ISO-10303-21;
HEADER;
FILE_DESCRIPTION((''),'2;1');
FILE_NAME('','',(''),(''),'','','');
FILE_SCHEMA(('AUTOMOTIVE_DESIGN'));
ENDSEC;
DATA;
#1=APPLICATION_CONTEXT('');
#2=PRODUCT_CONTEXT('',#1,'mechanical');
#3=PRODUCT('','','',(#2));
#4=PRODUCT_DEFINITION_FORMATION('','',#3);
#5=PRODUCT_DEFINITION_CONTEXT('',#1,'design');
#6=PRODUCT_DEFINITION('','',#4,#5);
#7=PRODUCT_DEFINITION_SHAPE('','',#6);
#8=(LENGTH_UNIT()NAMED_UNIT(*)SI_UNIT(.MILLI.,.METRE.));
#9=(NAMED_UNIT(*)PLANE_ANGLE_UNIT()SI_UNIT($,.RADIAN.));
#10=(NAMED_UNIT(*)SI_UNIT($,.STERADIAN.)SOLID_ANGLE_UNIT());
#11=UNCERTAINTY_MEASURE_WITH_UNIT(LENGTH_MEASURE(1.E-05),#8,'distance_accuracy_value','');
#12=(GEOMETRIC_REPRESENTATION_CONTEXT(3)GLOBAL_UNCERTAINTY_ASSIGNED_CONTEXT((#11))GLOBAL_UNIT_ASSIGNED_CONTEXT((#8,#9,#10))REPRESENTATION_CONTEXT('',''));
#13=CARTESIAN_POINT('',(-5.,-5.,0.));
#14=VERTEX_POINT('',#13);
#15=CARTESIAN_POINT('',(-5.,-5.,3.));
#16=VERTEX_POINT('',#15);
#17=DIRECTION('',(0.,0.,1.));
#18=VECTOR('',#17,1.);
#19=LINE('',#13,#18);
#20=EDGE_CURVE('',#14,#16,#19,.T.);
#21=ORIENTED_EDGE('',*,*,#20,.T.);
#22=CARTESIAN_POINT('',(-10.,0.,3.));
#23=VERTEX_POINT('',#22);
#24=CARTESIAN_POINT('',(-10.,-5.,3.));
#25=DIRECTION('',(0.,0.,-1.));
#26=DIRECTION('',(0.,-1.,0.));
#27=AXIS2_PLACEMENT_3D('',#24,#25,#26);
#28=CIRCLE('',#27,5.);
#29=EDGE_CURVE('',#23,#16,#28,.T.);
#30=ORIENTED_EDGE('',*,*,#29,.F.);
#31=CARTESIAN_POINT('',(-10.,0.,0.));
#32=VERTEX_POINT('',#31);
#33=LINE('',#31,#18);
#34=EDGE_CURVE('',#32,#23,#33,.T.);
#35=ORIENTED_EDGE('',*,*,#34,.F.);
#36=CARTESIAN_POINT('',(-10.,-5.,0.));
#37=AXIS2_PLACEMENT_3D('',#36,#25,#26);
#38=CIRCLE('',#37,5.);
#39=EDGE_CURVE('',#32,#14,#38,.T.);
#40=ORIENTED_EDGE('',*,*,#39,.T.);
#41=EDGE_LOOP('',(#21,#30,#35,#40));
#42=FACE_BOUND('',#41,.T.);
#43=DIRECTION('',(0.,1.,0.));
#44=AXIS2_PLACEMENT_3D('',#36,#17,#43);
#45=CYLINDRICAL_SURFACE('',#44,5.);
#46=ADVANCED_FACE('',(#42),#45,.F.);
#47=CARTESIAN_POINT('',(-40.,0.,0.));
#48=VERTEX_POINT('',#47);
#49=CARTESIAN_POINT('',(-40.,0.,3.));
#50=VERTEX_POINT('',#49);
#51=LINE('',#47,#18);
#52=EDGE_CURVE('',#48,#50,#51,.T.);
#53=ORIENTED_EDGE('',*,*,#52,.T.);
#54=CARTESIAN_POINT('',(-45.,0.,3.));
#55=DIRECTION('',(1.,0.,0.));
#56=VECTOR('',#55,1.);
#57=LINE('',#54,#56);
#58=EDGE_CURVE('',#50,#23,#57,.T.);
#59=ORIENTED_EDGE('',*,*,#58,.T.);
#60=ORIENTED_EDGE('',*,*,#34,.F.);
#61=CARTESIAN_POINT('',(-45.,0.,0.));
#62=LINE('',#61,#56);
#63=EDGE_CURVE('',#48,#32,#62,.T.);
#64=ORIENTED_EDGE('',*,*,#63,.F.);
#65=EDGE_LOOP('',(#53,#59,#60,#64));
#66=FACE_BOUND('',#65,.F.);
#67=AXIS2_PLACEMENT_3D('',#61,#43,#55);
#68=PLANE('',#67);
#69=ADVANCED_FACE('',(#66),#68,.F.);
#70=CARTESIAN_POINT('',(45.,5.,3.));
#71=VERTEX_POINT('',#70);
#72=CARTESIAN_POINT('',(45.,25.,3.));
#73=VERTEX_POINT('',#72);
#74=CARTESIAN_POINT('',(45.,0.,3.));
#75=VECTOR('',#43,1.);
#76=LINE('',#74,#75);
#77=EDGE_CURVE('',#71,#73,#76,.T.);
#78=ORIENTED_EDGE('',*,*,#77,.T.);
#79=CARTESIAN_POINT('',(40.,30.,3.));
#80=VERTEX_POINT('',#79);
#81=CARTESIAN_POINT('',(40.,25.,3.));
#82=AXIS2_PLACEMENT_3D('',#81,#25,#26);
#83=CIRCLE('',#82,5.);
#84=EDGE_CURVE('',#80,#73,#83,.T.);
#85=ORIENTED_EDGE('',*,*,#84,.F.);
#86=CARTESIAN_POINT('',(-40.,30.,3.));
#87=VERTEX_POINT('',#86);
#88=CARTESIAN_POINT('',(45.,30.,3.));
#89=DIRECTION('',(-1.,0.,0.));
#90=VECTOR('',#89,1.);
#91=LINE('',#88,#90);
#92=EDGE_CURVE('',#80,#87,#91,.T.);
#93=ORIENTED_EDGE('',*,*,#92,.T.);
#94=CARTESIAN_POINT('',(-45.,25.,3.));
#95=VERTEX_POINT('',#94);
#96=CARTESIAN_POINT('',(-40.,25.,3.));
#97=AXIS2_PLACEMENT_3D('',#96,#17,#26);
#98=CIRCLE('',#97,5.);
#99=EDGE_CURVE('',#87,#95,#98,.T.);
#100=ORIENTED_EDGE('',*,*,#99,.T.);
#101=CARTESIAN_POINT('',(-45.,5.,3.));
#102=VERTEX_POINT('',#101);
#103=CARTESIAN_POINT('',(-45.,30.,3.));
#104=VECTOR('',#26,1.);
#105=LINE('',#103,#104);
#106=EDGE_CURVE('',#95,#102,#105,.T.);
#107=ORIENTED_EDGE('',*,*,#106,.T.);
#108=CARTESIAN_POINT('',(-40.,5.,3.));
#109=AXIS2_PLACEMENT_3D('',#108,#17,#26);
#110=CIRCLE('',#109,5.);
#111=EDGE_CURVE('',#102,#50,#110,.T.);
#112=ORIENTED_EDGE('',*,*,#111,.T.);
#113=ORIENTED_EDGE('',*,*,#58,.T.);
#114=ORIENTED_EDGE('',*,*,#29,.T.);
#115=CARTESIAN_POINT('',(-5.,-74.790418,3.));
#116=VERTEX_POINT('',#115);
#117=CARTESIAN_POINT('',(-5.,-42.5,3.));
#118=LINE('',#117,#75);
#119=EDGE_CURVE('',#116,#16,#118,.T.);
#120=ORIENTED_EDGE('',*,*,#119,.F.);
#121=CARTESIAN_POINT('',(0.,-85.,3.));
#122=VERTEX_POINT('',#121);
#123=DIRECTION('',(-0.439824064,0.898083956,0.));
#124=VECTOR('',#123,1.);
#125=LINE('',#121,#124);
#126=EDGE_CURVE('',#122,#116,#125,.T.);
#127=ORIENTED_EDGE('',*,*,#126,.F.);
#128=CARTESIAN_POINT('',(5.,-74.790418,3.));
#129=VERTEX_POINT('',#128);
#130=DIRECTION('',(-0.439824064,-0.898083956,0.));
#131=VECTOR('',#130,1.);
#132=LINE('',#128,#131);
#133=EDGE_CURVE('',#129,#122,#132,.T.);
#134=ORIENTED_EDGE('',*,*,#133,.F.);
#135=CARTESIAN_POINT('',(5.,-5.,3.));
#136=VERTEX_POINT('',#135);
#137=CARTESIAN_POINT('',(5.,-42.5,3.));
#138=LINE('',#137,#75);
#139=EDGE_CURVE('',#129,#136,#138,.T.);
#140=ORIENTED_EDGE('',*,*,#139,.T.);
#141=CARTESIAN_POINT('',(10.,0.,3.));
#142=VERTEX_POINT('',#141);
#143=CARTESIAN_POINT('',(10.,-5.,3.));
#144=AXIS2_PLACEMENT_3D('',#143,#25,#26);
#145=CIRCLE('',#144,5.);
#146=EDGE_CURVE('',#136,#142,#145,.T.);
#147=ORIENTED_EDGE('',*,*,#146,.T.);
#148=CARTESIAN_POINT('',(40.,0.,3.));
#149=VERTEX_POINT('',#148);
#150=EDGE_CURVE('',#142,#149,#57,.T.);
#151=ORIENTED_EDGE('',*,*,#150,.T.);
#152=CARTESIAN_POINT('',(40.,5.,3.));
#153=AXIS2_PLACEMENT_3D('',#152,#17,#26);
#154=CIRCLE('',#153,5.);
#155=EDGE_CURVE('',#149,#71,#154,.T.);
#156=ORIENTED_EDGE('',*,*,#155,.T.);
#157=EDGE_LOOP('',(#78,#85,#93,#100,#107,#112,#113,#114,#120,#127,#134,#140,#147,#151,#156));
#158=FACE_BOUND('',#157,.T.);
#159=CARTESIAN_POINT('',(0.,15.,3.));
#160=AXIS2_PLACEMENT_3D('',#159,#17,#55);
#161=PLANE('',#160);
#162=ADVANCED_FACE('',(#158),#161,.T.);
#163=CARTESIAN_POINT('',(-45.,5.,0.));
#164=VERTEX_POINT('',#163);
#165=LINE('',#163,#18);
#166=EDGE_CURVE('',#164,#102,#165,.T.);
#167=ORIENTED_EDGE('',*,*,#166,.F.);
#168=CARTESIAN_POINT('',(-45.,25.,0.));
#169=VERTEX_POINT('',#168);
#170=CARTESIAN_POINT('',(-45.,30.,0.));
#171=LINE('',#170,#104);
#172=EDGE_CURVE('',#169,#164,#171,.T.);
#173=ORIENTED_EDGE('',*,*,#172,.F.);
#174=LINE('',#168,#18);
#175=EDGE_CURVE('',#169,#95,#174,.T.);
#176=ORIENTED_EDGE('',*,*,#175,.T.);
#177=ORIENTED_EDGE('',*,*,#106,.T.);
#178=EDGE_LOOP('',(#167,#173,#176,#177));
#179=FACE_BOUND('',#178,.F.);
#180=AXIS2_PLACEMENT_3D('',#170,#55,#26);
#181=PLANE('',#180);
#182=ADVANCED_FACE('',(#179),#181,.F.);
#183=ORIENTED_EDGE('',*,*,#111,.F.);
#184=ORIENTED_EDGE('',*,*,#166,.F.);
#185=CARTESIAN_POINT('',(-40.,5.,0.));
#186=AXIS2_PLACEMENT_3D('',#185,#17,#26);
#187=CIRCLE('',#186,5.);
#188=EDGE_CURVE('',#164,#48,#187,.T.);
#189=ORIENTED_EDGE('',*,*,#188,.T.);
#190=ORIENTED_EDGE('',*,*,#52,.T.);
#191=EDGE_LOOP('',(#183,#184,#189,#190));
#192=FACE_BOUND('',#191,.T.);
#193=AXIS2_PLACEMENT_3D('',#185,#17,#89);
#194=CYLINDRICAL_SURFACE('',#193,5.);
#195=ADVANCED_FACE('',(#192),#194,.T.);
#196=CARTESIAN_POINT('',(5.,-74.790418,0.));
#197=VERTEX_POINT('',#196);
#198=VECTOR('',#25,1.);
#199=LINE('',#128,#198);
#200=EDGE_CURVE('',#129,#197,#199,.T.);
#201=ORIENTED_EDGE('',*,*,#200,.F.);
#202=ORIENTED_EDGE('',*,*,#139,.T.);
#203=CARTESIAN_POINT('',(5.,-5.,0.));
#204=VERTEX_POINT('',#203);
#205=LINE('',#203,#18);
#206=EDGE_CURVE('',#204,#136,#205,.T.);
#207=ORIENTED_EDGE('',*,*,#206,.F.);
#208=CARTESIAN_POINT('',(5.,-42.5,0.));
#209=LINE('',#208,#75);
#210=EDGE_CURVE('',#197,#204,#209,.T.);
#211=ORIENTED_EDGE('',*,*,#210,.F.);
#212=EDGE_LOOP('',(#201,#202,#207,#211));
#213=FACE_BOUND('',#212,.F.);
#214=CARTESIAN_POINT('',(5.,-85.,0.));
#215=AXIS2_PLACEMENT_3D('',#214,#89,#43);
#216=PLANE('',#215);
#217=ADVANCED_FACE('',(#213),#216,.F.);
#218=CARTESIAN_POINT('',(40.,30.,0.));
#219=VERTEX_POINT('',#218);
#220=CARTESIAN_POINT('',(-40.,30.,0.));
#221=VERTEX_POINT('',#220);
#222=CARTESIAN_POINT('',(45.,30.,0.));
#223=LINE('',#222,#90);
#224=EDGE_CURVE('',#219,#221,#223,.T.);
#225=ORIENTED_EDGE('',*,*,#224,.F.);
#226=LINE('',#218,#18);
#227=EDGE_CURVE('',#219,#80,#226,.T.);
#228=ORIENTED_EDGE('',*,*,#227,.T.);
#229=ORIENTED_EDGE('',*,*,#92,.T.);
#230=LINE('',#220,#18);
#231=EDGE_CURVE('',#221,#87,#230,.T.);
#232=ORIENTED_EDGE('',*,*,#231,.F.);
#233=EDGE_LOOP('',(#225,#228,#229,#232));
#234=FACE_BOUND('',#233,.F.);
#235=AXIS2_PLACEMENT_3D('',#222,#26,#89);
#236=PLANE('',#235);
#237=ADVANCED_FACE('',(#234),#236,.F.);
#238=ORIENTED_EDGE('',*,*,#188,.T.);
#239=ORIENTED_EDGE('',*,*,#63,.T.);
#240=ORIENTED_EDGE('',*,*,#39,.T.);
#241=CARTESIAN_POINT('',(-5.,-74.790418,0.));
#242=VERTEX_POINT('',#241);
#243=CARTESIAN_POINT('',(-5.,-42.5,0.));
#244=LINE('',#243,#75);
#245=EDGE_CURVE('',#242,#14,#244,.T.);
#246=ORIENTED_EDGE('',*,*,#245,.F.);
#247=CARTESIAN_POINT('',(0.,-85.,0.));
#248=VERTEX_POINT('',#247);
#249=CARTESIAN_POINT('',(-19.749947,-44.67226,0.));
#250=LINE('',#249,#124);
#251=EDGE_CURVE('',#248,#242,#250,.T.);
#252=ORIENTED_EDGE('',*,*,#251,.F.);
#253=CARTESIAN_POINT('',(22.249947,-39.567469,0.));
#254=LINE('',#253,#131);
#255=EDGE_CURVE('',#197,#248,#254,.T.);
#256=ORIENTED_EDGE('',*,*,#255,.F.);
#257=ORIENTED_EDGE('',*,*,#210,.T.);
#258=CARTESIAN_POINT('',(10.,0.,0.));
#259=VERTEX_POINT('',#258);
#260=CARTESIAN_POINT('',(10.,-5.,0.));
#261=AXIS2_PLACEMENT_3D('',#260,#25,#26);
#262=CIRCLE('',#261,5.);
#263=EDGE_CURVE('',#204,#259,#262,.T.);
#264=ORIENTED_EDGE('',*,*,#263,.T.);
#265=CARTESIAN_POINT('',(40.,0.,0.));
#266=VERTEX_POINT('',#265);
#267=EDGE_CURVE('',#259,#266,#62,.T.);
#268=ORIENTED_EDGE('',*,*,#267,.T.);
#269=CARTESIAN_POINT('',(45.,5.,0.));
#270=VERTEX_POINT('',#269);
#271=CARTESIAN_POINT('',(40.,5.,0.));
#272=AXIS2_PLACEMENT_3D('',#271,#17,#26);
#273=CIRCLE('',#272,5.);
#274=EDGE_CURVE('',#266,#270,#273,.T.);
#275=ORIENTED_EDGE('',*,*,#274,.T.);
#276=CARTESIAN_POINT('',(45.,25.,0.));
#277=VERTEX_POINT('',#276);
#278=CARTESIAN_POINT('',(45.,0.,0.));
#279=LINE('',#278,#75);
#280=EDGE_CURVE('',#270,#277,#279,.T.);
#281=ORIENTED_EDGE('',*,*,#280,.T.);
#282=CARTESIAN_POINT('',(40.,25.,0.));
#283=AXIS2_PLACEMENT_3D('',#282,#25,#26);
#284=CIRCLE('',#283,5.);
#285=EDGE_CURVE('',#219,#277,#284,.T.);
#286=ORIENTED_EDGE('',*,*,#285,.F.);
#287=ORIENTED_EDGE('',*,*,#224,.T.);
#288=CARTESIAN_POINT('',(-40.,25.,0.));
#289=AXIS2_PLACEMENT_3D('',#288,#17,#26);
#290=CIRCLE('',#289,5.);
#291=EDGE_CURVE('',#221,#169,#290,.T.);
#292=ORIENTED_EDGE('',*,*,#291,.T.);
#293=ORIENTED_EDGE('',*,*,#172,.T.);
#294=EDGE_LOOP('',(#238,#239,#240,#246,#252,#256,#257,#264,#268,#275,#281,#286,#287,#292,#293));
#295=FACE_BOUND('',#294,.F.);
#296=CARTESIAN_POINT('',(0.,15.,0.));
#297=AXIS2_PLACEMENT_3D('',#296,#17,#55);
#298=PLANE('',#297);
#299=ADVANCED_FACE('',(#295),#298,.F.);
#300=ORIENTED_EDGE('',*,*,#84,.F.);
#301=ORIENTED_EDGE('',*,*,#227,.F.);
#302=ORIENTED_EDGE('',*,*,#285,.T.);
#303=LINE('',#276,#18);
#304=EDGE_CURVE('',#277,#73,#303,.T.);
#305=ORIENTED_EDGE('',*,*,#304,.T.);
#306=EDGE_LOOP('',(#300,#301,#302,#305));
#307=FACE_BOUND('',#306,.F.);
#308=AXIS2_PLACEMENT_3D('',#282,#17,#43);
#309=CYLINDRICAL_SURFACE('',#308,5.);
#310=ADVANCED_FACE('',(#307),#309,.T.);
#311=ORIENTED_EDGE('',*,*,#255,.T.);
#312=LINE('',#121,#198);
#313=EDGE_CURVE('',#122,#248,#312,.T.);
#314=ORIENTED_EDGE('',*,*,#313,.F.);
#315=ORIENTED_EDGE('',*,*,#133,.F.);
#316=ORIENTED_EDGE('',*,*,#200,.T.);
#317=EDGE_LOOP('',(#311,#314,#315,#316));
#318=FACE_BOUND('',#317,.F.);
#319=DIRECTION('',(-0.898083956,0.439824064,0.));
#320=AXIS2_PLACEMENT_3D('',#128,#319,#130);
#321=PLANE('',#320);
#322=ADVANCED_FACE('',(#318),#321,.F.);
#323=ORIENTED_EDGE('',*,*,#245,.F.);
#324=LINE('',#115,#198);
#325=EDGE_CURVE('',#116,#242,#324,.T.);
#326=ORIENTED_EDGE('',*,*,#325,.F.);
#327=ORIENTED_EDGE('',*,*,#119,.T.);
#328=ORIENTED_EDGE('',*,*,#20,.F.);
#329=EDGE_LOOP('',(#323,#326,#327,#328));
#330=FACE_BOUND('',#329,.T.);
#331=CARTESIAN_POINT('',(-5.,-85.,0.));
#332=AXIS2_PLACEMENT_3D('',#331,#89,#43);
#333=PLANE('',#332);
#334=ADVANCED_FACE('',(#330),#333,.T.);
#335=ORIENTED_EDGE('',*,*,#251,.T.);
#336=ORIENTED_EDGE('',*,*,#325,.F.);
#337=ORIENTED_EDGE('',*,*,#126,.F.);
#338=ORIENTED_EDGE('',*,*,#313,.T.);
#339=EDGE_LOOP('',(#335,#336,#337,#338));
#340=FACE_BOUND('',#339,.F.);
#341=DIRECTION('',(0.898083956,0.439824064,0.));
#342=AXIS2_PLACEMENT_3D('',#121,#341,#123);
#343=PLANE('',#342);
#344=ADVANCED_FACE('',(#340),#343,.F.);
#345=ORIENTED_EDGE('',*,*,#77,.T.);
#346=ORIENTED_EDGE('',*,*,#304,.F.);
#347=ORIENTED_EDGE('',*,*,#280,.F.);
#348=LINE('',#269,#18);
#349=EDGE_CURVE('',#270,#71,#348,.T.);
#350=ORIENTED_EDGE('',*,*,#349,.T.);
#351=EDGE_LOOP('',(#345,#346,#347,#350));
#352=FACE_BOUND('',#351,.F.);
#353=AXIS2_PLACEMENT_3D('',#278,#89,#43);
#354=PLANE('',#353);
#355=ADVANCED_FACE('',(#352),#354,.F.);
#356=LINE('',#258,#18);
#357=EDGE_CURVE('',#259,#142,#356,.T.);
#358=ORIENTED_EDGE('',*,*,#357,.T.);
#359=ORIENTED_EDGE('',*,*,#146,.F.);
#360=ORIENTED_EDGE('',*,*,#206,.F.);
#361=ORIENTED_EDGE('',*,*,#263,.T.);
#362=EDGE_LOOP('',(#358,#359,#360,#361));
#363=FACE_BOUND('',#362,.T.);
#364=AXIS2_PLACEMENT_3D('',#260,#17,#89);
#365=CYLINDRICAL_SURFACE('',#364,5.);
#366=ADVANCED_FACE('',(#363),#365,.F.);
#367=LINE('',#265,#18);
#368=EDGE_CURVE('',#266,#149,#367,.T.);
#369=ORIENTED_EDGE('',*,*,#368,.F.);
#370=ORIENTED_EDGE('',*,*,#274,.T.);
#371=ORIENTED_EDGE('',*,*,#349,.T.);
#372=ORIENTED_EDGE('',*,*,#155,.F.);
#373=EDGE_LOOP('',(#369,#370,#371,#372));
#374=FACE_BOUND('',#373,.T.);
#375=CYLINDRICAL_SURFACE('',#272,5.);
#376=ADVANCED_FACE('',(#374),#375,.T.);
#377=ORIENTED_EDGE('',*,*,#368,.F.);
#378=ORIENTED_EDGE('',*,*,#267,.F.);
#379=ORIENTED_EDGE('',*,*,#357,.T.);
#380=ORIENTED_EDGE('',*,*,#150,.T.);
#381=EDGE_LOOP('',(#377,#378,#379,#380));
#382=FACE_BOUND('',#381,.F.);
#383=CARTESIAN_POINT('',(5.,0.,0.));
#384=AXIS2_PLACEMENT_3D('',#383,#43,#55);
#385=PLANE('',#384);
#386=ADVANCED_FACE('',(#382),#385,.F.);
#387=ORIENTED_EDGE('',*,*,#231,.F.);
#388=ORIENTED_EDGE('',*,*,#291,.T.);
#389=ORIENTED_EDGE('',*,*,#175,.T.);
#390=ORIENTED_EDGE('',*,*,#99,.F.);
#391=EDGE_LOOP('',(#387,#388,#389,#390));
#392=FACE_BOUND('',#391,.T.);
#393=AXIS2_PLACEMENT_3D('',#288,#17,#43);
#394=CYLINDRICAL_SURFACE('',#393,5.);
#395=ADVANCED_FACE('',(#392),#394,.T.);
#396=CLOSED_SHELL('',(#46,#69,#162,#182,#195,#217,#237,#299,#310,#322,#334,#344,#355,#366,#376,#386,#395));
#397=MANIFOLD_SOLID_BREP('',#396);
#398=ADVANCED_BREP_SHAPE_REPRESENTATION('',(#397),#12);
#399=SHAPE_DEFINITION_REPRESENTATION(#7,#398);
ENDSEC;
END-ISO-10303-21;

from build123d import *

# Parameters (mm, degrees)
F0_W     = 10
F0_H     = 85
F1_DEPTH = 3
F2_R     = 5
F4_DEPTH = 25


# Not quite as in the source:
# - a feature names something its author has since deleted; it is built from what else it names


with BuildPart() as f1:
    # F0 (on Top) → F1 (new body)
    with BuildSketch(Plane.XY):
        Polygon((45, 30), (-45, 30), (-45, 0), (-5, 0), (5, 0), (45, 0), align=None)
        with Locations((0, -42.5)):
            Rectangle(F0_W, F0_H)
    extrude(amount=F1_DEPTH)

    # F2
    f2_edges = [f1.edges().sort_by_distance(p)[0] for p in [
        (-45, 0, 1.5),
        (-45, 30, 1.5),
        (45, 0, 1.5),
        (45, 30, 1.5),
        (5, 0, 1.5),
        (-5, 0, 1.5),
    ]]
    fillet(f2_edges, radius=F2_R)

    # F3 (on face) → F4 (cut)
    with BuildSketch(Plane.XY.offset(3)):
        Polygon((-5, -85), (0, -85), (-5, -74.790418148), align=None)
        Polygon((5, -74.790418148), (0, -85), (5, -85), align=None)
    extrude(amount=-F4_DEPTH, mode=Mode.SUBTRACT)


solid = f1.part
